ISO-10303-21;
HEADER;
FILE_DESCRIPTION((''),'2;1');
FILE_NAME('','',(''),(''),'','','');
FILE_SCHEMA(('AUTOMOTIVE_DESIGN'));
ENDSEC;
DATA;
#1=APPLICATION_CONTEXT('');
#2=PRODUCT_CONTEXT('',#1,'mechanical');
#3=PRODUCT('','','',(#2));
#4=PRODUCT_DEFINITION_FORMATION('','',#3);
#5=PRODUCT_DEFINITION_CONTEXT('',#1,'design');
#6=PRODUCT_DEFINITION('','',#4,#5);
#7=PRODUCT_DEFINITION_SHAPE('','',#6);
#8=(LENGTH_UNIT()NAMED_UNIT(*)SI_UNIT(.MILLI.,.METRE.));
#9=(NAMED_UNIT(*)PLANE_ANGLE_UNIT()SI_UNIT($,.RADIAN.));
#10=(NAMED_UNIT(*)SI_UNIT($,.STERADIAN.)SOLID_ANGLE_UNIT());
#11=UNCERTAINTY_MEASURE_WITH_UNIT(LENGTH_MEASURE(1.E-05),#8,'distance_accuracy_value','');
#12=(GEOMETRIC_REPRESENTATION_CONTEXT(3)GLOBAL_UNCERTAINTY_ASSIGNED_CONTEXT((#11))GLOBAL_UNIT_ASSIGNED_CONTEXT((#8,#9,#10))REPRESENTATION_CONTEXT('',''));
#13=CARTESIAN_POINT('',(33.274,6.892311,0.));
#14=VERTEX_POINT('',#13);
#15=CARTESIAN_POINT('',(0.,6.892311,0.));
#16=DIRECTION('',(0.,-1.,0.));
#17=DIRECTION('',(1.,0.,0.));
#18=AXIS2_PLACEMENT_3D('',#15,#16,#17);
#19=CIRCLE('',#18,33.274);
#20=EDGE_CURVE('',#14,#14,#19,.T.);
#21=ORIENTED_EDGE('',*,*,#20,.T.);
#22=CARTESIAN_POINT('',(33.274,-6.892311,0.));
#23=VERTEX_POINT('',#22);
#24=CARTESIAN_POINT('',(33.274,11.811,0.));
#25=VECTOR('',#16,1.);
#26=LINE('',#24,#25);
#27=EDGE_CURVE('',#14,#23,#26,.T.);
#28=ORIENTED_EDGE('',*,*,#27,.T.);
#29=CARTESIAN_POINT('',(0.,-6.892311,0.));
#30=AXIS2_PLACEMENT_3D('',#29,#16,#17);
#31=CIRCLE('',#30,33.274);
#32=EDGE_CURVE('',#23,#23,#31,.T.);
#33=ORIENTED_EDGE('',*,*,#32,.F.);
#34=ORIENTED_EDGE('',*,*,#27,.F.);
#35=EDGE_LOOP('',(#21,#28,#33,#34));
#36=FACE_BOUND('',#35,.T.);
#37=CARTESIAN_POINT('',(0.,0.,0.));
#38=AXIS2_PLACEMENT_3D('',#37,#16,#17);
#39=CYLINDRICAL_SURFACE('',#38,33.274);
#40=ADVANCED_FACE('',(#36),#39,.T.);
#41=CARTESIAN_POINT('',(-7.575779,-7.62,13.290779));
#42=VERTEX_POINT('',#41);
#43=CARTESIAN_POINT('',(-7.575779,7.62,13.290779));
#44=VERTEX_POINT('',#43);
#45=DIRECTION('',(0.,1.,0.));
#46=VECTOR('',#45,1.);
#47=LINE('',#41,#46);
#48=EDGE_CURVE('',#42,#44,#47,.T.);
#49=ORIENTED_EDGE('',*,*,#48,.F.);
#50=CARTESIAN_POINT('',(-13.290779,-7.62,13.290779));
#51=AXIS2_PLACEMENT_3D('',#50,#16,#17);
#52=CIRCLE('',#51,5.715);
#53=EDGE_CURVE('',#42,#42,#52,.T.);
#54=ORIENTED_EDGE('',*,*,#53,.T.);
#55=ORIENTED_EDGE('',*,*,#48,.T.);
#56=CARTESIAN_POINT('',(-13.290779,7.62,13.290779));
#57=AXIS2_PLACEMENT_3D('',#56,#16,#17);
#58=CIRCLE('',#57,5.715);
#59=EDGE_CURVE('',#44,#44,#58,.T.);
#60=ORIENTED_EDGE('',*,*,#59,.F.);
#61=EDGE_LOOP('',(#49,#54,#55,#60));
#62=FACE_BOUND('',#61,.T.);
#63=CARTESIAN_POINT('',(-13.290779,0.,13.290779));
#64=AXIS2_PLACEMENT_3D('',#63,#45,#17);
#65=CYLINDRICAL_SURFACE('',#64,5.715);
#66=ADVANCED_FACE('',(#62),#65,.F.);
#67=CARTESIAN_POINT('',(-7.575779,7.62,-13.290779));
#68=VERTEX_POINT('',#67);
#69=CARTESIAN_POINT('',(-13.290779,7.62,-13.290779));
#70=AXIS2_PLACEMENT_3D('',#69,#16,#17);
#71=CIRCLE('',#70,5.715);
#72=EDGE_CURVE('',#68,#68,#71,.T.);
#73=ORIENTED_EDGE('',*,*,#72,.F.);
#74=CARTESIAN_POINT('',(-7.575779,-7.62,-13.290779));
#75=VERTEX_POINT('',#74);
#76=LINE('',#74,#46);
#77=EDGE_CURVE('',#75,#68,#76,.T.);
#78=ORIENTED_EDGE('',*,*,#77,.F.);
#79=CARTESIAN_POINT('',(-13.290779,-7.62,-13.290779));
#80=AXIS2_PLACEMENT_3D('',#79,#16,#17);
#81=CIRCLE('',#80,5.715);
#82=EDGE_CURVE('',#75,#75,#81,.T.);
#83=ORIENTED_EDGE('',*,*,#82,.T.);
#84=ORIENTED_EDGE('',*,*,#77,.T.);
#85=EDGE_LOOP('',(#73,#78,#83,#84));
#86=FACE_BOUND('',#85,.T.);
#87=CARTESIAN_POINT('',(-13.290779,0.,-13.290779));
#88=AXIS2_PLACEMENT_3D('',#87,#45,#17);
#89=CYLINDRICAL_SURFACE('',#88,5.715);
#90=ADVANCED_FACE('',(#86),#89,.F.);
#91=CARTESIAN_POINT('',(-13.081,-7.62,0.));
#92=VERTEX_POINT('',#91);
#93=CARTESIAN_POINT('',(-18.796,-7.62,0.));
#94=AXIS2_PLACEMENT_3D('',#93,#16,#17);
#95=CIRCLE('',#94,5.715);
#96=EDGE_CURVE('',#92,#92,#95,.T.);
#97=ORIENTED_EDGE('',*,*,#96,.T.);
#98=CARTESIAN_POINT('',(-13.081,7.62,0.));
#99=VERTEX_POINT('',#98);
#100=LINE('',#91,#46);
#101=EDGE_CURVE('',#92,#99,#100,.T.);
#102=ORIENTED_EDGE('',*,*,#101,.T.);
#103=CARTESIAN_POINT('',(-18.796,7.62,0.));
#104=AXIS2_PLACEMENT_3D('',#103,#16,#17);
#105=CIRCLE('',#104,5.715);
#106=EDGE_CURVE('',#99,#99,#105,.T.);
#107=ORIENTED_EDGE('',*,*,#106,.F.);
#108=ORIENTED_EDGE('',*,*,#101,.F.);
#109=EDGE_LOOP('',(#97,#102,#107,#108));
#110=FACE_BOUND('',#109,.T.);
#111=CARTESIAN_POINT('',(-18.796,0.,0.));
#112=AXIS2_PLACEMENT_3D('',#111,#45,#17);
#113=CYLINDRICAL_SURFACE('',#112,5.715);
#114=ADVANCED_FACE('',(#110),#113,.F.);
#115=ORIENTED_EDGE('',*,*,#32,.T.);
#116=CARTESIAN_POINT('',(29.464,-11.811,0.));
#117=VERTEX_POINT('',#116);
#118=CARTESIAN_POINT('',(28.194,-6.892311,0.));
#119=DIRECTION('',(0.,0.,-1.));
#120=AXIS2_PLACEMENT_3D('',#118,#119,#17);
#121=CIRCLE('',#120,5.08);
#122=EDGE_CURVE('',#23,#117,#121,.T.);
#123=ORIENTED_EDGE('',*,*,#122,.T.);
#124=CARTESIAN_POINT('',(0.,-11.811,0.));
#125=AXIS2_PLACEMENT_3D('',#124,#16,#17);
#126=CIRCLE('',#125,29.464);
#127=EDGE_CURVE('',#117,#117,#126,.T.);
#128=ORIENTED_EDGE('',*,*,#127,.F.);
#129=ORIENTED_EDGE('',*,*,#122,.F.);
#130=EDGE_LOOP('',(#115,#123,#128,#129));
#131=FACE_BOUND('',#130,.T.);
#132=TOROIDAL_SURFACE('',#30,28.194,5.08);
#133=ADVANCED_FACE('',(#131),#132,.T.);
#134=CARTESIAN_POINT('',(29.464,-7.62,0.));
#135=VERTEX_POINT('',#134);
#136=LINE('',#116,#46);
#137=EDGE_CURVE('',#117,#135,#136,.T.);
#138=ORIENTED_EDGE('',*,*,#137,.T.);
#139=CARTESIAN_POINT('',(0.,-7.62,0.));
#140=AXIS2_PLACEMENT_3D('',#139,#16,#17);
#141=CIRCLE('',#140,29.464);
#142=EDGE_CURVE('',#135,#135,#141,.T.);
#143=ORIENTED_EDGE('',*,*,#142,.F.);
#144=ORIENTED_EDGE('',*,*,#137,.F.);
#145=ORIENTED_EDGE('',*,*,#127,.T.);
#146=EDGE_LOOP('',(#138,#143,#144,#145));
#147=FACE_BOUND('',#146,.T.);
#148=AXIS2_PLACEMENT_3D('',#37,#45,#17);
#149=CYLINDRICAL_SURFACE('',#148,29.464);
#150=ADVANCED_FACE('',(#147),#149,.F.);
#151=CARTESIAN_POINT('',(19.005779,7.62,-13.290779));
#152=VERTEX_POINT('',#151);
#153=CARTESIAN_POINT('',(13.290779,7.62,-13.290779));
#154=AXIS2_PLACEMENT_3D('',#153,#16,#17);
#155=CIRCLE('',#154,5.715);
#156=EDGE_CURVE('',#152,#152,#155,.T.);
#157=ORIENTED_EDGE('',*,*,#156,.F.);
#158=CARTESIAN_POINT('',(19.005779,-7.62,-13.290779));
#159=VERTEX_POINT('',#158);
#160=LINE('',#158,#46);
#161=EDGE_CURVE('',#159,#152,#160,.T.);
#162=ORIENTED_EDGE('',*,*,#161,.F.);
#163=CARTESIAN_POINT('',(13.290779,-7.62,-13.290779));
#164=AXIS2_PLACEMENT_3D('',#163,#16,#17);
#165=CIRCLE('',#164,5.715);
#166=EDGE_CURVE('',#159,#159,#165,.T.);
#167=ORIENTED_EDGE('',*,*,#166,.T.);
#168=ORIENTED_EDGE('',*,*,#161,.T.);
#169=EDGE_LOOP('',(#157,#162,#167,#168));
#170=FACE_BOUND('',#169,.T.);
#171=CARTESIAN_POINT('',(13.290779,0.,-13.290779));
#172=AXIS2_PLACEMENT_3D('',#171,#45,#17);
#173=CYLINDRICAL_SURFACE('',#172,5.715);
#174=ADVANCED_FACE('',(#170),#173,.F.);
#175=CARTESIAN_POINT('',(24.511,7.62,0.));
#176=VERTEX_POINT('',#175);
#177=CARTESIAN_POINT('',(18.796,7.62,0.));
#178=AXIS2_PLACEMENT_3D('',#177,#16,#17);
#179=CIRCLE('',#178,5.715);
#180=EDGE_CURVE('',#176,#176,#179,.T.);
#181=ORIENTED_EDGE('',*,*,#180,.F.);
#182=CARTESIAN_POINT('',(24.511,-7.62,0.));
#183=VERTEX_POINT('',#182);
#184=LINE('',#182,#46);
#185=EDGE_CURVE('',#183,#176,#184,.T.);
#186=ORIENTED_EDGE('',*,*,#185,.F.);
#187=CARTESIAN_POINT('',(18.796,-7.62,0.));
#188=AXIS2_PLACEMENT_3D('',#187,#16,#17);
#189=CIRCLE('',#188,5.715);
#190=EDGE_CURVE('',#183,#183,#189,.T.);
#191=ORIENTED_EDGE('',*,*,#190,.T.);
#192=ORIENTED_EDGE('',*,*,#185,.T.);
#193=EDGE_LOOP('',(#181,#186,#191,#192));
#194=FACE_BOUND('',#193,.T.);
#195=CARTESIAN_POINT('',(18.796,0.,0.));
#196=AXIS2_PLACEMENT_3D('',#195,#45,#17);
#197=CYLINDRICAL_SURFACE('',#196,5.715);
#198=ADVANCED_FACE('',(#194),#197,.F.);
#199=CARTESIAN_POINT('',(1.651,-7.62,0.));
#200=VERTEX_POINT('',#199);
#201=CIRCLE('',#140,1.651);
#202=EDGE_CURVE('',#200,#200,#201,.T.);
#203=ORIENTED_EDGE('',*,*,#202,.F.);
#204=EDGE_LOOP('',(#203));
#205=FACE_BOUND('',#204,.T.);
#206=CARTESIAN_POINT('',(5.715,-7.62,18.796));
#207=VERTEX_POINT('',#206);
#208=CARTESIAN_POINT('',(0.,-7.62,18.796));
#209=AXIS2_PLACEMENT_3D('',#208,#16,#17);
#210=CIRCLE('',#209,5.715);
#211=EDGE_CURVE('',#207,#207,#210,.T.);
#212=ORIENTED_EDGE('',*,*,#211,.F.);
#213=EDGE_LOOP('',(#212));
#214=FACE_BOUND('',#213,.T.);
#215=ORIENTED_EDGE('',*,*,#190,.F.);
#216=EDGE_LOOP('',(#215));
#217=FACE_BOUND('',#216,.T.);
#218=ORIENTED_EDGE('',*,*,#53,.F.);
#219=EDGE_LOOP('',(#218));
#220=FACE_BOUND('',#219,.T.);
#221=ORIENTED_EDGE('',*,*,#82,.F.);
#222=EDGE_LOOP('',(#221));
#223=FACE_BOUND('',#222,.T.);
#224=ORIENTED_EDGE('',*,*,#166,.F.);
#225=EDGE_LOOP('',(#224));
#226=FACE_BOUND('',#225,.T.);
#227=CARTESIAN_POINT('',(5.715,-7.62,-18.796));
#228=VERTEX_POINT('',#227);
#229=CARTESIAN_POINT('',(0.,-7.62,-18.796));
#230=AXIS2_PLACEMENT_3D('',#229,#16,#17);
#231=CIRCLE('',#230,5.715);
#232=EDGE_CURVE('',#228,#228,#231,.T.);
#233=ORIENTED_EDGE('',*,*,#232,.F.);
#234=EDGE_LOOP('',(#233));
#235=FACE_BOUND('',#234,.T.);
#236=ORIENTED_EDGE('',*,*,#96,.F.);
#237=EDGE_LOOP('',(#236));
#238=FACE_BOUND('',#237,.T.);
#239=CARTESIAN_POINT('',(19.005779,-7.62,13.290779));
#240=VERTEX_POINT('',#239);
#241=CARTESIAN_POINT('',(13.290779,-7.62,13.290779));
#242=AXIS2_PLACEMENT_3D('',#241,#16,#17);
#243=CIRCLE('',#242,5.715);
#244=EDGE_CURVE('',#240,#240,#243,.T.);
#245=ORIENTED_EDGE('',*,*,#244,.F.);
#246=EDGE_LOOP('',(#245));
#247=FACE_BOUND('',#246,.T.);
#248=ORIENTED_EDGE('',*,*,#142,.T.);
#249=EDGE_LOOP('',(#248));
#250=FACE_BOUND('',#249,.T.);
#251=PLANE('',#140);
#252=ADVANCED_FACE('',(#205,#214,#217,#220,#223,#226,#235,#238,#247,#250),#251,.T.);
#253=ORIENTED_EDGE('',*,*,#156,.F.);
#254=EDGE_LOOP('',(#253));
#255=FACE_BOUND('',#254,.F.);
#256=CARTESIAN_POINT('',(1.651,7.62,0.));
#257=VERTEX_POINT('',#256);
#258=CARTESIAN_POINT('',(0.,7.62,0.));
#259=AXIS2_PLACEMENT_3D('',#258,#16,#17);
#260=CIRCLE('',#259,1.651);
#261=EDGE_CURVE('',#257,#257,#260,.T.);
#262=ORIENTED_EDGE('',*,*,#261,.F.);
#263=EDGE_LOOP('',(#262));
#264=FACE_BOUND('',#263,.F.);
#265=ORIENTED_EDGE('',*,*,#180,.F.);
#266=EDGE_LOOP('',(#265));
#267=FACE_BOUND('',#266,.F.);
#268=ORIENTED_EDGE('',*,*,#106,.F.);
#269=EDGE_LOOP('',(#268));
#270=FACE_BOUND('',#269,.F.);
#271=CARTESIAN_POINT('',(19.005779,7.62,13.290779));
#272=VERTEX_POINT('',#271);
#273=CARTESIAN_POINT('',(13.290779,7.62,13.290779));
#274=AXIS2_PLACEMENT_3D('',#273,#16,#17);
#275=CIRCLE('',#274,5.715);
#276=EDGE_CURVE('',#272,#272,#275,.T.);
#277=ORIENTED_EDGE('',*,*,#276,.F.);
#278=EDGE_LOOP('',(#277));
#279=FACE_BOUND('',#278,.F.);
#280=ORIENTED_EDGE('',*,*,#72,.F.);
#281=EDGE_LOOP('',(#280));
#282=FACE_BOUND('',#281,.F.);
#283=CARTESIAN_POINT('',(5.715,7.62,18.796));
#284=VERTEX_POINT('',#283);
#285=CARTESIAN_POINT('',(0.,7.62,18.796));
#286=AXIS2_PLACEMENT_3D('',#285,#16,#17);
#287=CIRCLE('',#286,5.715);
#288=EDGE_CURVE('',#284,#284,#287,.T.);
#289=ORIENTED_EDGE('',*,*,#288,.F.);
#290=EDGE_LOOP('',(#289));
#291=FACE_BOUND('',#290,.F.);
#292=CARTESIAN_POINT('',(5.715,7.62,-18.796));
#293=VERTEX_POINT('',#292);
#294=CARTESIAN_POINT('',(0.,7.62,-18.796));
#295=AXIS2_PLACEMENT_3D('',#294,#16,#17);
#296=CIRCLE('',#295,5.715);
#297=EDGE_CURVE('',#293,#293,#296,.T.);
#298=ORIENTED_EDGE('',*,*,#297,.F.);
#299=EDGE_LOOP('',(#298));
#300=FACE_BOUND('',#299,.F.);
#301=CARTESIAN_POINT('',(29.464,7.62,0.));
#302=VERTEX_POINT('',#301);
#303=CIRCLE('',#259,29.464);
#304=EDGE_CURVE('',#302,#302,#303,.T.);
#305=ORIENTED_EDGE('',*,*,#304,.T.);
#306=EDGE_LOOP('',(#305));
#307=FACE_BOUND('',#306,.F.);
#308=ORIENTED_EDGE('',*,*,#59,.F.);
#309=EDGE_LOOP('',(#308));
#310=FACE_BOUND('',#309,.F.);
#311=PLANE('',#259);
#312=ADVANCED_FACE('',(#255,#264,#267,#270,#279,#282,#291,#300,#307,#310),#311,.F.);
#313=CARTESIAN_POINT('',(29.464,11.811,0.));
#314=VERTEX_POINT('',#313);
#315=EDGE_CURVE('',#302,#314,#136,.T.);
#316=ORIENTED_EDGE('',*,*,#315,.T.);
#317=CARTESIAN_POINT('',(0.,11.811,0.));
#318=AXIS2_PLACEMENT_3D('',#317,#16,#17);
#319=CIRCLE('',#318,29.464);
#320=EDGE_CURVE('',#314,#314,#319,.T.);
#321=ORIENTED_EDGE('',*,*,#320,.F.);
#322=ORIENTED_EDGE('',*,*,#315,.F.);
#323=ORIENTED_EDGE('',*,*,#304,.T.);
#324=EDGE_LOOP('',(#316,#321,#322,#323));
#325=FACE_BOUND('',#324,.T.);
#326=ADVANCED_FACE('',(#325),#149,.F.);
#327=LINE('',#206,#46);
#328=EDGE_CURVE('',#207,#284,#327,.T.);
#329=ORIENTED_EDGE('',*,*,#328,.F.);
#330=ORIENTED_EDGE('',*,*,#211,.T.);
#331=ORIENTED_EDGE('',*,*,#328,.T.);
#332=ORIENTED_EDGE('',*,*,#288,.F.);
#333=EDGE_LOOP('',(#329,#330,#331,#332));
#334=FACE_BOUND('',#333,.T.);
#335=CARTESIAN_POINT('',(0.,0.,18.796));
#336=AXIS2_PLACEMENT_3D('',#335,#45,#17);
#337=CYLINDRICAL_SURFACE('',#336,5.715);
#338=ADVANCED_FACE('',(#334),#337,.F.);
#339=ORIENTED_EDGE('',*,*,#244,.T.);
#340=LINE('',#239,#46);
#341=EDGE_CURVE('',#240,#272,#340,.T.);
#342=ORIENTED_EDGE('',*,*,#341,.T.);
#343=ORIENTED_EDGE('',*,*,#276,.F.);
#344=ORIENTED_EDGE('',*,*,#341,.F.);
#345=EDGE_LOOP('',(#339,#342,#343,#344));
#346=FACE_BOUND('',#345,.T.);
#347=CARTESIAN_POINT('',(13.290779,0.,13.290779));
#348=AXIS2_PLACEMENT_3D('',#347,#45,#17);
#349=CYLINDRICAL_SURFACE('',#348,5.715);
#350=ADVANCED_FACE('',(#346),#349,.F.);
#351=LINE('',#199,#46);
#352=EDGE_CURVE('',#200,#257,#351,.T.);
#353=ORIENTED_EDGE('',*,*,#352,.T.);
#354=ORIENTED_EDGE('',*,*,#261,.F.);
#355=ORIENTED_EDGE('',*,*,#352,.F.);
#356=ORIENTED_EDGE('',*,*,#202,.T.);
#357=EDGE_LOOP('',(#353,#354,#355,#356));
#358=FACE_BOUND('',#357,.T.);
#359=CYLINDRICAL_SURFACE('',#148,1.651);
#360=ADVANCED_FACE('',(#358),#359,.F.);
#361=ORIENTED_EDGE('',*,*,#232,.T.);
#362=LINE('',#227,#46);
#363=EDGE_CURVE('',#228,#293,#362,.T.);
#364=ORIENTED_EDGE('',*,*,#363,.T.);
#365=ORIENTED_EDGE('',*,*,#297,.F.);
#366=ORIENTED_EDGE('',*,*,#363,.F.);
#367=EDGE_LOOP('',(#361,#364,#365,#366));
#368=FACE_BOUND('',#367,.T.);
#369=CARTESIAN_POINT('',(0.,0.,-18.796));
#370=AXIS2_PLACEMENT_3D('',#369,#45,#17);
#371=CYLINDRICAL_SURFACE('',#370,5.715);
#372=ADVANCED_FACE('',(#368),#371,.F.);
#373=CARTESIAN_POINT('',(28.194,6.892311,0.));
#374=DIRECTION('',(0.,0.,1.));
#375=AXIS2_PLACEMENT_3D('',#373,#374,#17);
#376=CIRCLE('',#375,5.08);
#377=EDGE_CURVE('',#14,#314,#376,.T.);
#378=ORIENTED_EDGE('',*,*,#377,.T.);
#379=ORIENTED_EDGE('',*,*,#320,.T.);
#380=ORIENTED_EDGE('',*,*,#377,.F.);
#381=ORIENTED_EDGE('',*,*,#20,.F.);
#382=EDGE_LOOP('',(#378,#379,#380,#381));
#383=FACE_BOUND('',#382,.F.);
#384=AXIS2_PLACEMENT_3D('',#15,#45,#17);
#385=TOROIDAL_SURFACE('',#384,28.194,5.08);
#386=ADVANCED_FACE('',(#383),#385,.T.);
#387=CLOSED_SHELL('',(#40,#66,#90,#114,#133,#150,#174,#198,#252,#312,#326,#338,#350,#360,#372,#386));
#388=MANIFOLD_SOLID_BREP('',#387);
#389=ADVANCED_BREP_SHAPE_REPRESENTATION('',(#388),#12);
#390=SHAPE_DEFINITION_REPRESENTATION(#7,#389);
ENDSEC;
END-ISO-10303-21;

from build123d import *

# Parameters (mm, degrees)
F0_R     = 29.464
F0_R_2   = 5.715
F0_R_3   = 1.651
F1_DEPTH = 7.62
F0_R_4   = 33.274
F2_DEPTH = 11.811


# Not quite as in the source:
# - a fillet or chamfer that OpenCascade refuses, or shapes differently, is made with other operations: its cross-section is extruded or revolved along the edge and cut away or added


with BuildPart() as f1:
    # F0 (on Front) → F1 (new body, symmetric)
    with BuildSketch(Plane.XZ):
        Circle(F0_R)
        with Locations((-13.2907790592, -13.2907790592)):
            Circle(F0_R_2, mode=Mode.SUBTRACT)
        with Locations((0, -18.796)):
            Circle(F0_R_2, mode=Mode.SUBTRACT)
        with Locations((13.2907790592, -13.2907790592)):
            Circle(F0_R_2, mode=Mode.SUBTRACT)
        with Locations((-18.796, 0)):
            Circle(F0_R_2, mode=Mode.SUBTRACT)
        with Locations((-13.2907790592, 13.2907790592)):
            Circle(F0_R_2, mode=Mode.SUBTRACT)
        Circle(F0_R_3, mode=Mode.SUBTRACT)
        with Locations((13.2907790592, 13.2907790592)):
            Circle(F0_R_2, mode=Mode.SUBTRACT)
        with Locations((18.796, 0)):
            Circle(F0_R_2, mode=Mode.SUBTRACT)
        with Locations((0, 18.796)):
            Circle(F0_R_2, mode=Mode.SUBTRACT)
    extrude(amount=F1_DEPTH, both=True)

    # F0 (on Front) → F2 (join, symmetric)
    with BuildSketch(Plane.XZ):
        Circle(F0_R_4)
        Circle(F0_R, mode=Mode.SUBTRACT)
    extrude(amount=F2_DEPTH, both=True)

    # F3: fillet of radius 5.08 on 3 edges, made by hand

    # F3_s1 → F3_t2 (revolve, cut)
    with BuildSketch(Plane.XY):
        with BuildLine():
            ThreePointArc((33.274, 6.8923111503), (32.2100926284, 10.0031631237), (29.464, 11.811))
            Line((29.464, 11.811), (33.274, 11.811))
            Line((33.274, 11.811), (33.274, 6.8923111503))
        make_face()
    revolve(axis=Axis((0, 11.811, 0), (0, -1, 0)), mode=Mode.SUBTRACT)

    # F3_s3 → F3_t4 (revolve, cut)
    with BuildSketch(Plane.XY):
        with BuildLine():
            ThreePointArc((33.274, -6.8923111503), (32.2100926284, -10.0031631237), (29.464, -11.811))
            Line((29.464, -11.811), (33.274, -11.811))
            Line((33.274, -11.811), (33.274, -6.8923111503))
        make_face()
    revolve(axis=Axis((0, -11.811, 0), (0, -1, 0)), mode=Mode.SUBTRACT)


solid = f1.part
